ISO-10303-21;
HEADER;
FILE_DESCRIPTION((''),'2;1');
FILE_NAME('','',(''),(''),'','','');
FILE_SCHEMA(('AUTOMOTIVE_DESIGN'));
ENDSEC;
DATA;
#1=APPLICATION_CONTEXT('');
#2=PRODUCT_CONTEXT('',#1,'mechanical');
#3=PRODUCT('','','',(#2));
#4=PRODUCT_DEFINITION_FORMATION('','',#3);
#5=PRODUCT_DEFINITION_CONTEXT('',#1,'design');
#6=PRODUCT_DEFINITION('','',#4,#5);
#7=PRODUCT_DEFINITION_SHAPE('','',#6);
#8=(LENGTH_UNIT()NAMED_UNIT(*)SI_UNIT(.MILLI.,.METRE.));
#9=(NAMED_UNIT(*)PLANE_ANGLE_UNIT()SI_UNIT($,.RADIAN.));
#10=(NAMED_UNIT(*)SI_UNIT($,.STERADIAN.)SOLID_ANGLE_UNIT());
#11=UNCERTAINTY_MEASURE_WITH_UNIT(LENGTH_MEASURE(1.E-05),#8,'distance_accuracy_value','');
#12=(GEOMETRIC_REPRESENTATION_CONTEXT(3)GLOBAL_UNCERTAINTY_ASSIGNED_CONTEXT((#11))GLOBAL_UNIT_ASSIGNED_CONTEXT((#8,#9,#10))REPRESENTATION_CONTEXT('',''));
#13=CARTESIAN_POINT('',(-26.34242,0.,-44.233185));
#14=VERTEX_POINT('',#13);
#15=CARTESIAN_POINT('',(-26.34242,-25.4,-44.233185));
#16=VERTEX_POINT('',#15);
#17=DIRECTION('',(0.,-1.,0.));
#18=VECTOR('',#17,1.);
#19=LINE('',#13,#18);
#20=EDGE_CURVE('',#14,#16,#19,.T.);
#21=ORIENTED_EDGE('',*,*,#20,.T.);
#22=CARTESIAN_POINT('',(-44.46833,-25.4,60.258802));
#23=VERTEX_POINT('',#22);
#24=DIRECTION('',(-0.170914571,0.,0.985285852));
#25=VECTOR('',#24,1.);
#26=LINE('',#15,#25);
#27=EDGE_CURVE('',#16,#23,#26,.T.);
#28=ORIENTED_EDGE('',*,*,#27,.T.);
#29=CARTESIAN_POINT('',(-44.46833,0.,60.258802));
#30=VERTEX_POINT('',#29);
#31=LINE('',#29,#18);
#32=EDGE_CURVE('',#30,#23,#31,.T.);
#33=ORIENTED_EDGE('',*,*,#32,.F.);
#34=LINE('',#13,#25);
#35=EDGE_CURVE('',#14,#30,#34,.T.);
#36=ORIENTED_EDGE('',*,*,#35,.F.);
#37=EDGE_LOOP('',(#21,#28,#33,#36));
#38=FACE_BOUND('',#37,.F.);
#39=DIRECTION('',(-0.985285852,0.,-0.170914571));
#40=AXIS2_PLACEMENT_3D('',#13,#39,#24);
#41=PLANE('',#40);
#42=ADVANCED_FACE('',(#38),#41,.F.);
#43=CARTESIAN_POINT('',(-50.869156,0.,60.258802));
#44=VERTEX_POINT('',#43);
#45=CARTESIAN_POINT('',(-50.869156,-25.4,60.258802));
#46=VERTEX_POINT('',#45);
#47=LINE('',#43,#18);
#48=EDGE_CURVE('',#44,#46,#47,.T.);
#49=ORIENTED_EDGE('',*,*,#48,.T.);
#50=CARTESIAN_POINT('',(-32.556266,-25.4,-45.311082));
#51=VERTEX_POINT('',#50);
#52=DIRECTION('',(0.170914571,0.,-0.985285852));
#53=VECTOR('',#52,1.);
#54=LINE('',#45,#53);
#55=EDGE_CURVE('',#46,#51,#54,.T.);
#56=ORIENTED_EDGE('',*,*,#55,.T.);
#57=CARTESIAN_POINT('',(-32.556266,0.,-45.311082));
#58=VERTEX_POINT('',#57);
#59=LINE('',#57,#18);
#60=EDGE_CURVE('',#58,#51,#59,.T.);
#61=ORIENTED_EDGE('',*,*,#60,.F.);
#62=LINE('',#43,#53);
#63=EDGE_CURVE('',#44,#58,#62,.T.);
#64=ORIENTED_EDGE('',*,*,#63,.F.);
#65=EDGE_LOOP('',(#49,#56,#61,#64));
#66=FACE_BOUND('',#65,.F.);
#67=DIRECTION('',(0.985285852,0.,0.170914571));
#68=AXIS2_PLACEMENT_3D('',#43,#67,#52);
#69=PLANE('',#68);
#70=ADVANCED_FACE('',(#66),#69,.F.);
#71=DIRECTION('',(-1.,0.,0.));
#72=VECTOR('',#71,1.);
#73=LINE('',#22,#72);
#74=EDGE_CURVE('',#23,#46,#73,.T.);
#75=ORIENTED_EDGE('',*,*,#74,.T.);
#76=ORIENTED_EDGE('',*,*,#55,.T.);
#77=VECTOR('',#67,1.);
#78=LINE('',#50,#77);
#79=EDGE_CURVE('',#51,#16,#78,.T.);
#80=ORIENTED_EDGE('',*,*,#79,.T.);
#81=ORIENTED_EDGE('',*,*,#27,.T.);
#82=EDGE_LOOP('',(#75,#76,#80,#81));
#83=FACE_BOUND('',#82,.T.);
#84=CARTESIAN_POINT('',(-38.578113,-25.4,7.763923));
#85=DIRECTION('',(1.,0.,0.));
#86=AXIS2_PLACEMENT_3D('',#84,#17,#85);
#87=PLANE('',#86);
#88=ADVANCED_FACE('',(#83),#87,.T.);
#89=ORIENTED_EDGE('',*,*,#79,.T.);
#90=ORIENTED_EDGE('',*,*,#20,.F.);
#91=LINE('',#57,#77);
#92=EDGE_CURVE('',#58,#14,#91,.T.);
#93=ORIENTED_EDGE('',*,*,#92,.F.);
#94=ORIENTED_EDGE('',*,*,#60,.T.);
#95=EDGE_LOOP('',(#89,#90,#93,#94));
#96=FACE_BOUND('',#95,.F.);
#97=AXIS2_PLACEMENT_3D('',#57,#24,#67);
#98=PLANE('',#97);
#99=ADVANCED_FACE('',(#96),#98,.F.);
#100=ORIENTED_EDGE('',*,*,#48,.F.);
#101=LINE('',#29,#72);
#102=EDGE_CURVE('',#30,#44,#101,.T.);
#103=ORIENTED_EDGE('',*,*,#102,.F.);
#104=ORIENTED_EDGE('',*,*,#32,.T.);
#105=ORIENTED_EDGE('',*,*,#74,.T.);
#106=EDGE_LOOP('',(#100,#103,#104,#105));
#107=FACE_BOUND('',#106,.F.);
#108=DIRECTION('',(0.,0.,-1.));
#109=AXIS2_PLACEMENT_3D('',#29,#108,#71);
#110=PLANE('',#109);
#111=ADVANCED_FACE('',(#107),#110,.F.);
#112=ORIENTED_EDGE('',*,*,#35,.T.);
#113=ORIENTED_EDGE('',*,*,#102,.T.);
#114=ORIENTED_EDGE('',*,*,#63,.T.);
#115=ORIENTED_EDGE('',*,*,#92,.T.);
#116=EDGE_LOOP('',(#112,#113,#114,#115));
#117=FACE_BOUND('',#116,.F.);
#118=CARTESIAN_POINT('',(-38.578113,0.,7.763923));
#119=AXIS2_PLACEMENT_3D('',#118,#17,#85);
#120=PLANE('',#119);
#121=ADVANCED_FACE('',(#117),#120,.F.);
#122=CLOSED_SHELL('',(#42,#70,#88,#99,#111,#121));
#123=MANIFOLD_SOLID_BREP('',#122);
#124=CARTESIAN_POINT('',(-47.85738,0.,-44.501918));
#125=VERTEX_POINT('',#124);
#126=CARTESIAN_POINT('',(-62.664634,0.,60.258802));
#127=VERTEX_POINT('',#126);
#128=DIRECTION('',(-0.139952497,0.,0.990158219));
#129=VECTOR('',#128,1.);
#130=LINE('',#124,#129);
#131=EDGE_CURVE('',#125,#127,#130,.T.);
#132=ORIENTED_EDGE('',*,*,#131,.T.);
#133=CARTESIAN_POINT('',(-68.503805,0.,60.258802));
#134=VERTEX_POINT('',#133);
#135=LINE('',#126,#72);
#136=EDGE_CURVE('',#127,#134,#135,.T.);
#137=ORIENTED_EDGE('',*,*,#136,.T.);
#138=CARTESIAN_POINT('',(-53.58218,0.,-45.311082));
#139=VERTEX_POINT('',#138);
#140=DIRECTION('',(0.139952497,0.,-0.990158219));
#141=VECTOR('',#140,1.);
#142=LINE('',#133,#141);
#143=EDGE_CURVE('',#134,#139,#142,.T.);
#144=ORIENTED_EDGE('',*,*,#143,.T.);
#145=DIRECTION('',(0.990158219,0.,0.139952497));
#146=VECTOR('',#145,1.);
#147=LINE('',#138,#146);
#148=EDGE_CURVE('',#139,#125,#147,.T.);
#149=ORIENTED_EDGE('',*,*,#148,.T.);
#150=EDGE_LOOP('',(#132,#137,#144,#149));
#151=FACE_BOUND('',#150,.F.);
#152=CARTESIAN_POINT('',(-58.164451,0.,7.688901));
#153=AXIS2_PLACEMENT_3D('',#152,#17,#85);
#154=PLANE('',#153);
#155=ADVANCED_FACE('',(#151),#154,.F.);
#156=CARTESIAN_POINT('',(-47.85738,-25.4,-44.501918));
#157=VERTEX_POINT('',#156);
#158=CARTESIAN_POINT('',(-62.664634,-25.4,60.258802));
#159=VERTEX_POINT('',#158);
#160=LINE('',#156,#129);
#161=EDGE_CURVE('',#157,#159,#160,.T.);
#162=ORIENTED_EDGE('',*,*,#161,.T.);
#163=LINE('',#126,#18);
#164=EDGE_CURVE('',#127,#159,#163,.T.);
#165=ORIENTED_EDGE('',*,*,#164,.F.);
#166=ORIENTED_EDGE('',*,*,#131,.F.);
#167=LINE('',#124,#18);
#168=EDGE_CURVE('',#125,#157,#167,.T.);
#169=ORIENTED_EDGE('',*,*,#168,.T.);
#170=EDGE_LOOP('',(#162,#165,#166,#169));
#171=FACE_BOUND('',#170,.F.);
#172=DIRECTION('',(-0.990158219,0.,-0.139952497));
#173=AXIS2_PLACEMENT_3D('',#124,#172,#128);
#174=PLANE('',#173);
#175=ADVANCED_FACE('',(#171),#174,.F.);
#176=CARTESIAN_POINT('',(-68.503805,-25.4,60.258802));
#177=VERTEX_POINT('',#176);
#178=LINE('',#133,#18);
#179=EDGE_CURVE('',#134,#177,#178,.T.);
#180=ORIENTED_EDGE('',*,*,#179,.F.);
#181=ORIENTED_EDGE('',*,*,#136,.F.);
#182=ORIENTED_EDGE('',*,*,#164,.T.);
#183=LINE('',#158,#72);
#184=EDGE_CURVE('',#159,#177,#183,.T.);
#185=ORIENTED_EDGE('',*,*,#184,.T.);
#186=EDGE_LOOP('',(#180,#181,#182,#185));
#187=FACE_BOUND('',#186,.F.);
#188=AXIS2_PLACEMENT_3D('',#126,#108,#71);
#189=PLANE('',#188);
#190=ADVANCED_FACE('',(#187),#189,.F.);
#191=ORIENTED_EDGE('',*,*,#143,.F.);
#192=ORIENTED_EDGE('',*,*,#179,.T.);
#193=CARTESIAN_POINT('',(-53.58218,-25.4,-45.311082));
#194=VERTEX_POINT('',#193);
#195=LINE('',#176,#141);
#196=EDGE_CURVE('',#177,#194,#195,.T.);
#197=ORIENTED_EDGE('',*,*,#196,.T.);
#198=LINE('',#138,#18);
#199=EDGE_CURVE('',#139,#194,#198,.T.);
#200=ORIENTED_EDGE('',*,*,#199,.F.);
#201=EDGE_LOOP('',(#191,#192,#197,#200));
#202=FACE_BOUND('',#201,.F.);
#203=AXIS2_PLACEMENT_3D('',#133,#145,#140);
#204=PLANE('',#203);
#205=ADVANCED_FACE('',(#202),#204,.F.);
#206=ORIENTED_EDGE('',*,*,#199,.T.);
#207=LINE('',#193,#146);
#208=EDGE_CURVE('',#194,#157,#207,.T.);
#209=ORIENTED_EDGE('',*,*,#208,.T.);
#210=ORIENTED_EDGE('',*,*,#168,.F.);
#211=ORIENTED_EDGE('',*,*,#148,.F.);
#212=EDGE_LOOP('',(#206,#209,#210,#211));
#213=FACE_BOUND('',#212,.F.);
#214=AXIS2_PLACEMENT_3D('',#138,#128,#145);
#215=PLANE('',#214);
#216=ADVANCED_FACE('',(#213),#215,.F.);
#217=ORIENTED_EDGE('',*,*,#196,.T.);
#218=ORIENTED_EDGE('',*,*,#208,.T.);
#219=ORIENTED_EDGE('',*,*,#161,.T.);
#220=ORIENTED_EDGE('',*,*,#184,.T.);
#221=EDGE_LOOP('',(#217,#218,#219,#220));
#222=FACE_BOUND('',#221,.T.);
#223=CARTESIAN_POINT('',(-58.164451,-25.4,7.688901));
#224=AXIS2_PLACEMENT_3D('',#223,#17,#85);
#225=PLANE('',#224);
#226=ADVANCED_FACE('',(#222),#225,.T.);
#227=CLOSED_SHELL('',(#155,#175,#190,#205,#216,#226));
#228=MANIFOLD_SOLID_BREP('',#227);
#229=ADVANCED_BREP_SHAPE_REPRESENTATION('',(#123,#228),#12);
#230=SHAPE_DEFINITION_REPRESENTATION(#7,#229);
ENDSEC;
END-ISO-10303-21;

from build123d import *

# Parameters (mm, degrees)
F1_DEPTH = 25.4


# Not quite as in the source:
# - the program builds the solid bodies; features that only make, move or delete a surface that nothing else refers to are left out


with BuildPart() as f1:
    # F0 (on Front) → F1 (new body)
    with BuildSketch(Plane.XZ):
        Polygon((-62.6646338144, 60.2588020265), (-68.5038045049, 60.2588020265), (-53.5821802914, -45.3110821545), (-47.8573796931, -44.5019184059), align=None)
    extrude(amount=F1_DEPTH)


with BuildPart() as f1b:
    # F0 (on Front) → F1, piece 2 (new body)
    with BuildSketch(Plane.XZ):
        Polygon((-44.4683302993, 60.2588020265), (-50.8691556752, 60.2588020265), (-32.5562655926, -45.3110821545), (-26.3424197879, -44.2331850241), align=None)
    extrude(amount=F1_DEPTH)


solid = Compound([f1.part, f1b.part])
